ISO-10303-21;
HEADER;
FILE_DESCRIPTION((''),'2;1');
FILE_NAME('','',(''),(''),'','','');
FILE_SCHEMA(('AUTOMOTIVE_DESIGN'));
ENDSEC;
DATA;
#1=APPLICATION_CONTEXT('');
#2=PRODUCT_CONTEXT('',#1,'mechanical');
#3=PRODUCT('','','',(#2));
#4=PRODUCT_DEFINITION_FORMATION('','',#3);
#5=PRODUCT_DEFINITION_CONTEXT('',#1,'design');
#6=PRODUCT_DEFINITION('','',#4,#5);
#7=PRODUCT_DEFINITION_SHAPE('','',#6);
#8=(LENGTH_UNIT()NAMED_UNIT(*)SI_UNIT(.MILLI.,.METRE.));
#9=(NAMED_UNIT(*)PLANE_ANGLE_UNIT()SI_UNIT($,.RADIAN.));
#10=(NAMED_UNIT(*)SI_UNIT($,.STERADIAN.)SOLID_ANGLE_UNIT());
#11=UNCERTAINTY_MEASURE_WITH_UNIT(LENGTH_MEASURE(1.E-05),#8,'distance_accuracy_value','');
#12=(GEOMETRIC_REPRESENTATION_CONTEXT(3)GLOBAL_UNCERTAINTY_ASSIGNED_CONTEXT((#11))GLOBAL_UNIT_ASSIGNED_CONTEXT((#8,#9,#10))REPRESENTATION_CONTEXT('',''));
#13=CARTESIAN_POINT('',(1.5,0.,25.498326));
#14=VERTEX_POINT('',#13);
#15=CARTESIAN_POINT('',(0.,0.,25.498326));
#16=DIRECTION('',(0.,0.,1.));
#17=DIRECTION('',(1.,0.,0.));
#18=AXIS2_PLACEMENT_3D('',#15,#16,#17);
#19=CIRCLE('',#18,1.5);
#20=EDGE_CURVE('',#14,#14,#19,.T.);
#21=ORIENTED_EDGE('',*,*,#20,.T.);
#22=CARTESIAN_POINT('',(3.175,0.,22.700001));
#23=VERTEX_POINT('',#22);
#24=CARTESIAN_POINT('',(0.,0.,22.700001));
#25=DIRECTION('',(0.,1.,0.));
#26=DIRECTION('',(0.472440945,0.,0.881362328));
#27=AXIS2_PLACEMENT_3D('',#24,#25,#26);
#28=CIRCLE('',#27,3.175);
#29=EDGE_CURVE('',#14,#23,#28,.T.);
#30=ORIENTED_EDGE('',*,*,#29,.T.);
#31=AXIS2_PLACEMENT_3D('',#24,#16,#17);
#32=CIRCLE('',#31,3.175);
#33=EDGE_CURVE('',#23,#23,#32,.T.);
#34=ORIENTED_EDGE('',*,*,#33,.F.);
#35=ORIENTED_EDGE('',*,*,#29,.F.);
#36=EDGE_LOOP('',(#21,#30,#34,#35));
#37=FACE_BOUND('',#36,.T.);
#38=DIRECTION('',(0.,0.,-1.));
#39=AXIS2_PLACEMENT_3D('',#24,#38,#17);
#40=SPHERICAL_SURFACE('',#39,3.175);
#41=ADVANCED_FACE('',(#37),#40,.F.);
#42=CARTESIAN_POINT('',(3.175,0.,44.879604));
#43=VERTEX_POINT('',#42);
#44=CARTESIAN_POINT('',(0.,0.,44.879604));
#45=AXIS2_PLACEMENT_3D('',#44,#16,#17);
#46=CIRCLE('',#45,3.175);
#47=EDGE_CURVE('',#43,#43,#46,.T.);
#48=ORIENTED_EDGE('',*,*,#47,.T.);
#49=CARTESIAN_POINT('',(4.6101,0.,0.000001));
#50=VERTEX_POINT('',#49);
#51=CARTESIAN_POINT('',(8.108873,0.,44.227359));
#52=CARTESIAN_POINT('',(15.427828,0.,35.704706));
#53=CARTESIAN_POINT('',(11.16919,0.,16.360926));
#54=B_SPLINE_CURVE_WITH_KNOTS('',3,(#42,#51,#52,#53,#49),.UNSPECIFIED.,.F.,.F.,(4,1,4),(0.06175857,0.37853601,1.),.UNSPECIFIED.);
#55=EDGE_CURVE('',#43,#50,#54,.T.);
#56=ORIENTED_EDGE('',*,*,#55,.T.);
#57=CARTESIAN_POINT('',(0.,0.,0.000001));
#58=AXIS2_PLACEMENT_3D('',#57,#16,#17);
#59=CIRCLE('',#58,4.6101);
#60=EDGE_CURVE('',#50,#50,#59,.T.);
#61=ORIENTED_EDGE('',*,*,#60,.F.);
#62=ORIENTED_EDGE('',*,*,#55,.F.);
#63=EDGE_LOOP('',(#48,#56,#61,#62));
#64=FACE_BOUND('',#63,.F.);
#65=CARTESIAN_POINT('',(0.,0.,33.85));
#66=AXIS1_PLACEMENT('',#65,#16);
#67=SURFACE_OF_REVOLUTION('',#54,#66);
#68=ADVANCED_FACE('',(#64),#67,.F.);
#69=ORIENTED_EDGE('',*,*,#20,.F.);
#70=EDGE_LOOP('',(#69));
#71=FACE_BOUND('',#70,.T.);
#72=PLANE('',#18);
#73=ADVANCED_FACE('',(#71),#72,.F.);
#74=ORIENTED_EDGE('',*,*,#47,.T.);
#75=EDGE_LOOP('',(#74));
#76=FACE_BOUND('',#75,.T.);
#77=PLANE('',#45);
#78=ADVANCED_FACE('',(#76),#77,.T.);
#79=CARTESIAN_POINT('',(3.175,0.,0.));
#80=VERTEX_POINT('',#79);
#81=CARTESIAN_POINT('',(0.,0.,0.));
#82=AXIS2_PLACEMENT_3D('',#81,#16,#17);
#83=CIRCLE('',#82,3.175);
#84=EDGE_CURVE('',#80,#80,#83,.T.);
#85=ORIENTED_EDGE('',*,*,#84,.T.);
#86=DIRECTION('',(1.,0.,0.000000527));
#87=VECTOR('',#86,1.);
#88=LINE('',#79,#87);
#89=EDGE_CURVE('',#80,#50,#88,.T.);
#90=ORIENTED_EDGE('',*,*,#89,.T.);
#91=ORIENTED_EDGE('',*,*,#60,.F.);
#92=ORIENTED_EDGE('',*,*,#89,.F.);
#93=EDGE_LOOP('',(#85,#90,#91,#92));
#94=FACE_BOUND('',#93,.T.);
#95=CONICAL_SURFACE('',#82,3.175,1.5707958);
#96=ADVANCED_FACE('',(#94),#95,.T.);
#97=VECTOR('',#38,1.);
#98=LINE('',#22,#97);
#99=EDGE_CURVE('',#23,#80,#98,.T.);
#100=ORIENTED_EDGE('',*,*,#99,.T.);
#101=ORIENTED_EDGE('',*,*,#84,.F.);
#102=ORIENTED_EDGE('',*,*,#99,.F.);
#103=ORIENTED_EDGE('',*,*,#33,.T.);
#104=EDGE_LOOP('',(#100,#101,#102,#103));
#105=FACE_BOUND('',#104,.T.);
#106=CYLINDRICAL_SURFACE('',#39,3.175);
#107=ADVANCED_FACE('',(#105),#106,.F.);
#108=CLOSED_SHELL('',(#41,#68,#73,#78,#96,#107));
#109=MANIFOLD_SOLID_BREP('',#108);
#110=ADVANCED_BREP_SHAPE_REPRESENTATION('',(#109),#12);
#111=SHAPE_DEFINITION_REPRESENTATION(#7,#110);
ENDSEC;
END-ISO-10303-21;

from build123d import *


# Not quite as in the source:
# - ends of sketch curves that miss each other by under 0.0002 mm in the source are joined


with BuildPart() as f1:
    # F0 (on Front) → F1 (revolve)
    with BuildSketch(Plane.XZ):
        with BuildLine():
            Line((0, 44.8796040858), (0, 25.4983261479))
            Line((0, 25.4983261479), (1.5, 25.4983261479))
            ThreePointArc((1.5, 25.4983261479), (2.7242544852, 24.3306639644), (3.175, 22.7000007558))
            Line((3.175, 22.7000007558), (3.175, 0))
            Line((3.175, 0), (4.6101, 7.558e-07))
            add(Edge.make_bspline(
                [(3.175, 44.8796040858), (8.1088727658, 44.2273590028), (15.427827503, 35.7047061614), (11.1691896678, 16.3609262944), (4.6101, 7.558e-07)],
                knots=[0.0617585703, 0.0617585703, 0.0617585703, 0.0617585703, 0.3785360097, 1, 1, 1, 1], degree=3))
            Line((3.175, 44.8796040858), (0, 44.8796040858))
        make_face()
    revolve(axis=Axis((0, 0, 33.8500003779), (0, 0, 1)))


solid = f1.part
